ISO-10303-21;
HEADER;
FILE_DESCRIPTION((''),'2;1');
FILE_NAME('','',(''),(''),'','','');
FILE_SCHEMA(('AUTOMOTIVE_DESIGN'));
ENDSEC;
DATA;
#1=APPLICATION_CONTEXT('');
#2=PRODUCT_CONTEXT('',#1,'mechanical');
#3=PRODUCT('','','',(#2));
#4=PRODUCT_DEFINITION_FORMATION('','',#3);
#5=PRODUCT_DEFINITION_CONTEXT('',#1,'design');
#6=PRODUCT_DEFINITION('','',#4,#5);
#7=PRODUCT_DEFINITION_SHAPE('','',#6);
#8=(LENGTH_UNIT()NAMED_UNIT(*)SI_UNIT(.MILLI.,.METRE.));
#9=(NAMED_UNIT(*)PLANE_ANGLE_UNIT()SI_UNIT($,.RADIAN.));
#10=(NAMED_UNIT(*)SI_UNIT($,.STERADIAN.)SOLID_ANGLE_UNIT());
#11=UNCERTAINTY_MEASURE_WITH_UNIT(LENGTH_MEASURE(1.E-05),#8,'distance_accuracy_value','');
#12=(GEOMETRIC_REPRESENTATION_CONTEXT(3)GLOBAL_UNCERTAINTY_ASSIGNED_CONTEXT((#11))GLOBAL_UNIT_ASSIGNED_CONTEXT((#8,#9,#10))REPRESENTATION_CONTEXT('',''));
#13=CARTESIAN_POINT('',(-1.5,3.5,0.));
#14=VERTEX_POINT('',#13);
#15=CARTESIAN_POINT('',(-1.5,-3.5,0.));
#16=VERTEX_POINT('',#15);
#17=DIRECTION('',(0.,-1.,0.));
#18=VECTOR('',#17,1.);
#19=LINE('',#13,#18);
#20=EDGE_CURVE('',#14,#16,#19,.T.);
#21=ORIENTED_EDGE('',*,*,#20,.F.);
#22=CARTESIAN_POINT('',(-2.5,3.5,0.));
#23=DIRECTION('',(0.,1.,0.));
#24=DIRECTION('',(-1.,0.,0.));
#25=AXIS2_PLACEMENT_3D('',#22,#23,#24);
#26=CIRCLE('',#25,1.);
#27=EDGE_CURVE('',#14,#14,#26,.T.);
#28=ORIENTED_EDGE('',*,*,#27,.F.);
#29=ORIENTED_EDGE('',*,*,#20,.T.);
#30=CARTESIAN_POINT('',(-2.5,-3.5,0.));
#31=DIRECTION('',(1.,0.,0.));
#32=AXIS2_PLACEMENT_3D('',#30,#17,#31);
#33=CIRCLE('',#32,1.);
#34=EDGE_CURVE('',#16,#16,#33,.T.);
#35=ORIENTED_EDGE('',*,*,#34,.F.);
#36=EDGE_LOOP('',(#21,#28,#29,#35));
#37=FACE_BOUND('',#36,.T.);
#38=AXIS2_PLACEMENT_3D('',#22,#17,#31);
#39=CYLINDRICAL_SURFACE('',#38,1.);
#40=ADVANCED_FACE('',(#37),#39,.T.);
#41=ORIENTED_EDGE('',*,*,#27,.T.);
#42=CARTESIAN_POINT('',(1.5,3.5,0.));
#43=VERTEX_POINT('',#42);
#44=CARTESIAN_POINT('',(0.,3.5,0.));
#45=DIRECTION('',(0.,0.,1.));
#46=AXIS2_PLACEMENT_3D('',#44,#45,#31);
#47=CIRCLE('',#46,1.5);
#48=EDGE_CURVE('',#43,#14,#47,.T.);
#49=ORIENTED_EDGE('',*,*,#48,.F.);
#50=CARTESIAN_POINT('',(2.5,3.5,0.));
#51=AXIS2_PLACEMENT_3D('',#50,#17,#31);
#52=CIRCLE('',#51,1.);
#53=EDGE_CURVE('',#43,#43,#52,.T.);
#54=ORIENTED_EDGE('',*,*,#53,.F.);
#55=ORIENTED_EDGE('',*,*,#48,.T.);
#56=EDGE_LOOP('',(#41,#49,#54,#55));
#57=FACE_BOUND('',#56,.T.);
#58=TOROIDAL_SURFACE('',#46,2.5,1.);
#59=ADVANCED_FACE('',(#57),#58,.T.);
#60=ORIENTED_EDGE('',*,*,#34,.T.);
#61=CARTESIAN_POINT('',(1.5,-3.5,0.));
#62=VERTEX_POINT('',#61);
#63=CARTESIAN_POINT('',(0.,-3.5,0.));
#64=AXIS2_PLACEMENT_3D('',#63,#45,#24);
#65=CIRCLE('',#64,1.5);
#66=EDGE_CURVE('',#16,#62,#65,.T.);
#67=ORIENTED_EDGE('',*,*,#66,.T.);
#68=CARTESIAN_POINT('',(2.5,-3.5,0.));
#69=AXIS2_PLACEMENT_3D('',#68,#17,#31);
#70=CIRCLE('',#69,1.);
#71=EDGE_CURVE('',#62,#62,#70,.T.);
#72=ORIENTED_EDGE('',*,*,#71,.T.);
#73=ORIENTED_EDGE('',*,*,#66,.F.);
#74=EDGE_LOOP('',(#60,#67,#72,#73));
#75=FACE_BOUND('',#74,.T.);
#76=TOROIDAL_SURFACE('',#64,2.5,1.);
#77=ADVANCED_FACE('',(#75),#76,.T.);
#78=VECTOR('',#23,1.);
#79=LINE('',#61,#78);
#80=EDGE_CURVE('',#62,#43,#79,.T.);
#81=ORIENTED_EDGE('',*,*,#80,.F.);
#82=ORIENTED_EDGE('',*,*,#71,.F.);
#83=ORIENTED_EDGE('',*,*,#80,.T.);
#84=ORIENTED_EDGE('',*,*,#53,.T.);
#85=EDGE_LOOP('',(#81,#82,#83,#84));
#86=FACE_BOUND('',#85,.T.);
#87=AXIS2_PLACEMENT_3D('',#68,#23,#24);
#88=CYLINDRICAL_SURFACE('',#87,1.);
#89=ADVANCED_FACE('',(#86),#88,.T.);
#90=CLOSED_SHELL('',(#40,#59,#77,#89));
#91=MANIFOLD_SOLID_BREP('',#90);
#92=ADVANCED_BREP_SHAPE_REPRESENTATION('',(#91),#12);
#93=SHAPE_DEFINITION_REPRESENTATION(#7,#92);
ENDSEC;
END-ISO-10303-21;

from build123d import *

# Parameters (mm, degrees)
F1_R = 1


# Not quite as in the source:
# - a feature of the source that left no trace in its solid (it failed there, or was rolled back) is left out


with BuildPart() as f2:
    # F2: sweep along a path in F0
    with BuildLine(Plane.XY) as f2_path:
        ThreePointArc((2.5, 3.5), (0, 6), (-2.5, 3.5))
        Line((-2.5, 3.5), (-2.5, -3.5))
        ThreePointArc((-2.5, -3.5), (0, -6), (2.5, -3.5))
        Line((2.5, -3.5), (2.5, 3.5))
    # F1 (on Front) → F2 (sweep)
    with BuildSketch(Plane.XZ):
        with Locations((-2.5, 0)):
            Circle(F1_R)
    sweep(path=f2_path.line)


solid = f2.part
